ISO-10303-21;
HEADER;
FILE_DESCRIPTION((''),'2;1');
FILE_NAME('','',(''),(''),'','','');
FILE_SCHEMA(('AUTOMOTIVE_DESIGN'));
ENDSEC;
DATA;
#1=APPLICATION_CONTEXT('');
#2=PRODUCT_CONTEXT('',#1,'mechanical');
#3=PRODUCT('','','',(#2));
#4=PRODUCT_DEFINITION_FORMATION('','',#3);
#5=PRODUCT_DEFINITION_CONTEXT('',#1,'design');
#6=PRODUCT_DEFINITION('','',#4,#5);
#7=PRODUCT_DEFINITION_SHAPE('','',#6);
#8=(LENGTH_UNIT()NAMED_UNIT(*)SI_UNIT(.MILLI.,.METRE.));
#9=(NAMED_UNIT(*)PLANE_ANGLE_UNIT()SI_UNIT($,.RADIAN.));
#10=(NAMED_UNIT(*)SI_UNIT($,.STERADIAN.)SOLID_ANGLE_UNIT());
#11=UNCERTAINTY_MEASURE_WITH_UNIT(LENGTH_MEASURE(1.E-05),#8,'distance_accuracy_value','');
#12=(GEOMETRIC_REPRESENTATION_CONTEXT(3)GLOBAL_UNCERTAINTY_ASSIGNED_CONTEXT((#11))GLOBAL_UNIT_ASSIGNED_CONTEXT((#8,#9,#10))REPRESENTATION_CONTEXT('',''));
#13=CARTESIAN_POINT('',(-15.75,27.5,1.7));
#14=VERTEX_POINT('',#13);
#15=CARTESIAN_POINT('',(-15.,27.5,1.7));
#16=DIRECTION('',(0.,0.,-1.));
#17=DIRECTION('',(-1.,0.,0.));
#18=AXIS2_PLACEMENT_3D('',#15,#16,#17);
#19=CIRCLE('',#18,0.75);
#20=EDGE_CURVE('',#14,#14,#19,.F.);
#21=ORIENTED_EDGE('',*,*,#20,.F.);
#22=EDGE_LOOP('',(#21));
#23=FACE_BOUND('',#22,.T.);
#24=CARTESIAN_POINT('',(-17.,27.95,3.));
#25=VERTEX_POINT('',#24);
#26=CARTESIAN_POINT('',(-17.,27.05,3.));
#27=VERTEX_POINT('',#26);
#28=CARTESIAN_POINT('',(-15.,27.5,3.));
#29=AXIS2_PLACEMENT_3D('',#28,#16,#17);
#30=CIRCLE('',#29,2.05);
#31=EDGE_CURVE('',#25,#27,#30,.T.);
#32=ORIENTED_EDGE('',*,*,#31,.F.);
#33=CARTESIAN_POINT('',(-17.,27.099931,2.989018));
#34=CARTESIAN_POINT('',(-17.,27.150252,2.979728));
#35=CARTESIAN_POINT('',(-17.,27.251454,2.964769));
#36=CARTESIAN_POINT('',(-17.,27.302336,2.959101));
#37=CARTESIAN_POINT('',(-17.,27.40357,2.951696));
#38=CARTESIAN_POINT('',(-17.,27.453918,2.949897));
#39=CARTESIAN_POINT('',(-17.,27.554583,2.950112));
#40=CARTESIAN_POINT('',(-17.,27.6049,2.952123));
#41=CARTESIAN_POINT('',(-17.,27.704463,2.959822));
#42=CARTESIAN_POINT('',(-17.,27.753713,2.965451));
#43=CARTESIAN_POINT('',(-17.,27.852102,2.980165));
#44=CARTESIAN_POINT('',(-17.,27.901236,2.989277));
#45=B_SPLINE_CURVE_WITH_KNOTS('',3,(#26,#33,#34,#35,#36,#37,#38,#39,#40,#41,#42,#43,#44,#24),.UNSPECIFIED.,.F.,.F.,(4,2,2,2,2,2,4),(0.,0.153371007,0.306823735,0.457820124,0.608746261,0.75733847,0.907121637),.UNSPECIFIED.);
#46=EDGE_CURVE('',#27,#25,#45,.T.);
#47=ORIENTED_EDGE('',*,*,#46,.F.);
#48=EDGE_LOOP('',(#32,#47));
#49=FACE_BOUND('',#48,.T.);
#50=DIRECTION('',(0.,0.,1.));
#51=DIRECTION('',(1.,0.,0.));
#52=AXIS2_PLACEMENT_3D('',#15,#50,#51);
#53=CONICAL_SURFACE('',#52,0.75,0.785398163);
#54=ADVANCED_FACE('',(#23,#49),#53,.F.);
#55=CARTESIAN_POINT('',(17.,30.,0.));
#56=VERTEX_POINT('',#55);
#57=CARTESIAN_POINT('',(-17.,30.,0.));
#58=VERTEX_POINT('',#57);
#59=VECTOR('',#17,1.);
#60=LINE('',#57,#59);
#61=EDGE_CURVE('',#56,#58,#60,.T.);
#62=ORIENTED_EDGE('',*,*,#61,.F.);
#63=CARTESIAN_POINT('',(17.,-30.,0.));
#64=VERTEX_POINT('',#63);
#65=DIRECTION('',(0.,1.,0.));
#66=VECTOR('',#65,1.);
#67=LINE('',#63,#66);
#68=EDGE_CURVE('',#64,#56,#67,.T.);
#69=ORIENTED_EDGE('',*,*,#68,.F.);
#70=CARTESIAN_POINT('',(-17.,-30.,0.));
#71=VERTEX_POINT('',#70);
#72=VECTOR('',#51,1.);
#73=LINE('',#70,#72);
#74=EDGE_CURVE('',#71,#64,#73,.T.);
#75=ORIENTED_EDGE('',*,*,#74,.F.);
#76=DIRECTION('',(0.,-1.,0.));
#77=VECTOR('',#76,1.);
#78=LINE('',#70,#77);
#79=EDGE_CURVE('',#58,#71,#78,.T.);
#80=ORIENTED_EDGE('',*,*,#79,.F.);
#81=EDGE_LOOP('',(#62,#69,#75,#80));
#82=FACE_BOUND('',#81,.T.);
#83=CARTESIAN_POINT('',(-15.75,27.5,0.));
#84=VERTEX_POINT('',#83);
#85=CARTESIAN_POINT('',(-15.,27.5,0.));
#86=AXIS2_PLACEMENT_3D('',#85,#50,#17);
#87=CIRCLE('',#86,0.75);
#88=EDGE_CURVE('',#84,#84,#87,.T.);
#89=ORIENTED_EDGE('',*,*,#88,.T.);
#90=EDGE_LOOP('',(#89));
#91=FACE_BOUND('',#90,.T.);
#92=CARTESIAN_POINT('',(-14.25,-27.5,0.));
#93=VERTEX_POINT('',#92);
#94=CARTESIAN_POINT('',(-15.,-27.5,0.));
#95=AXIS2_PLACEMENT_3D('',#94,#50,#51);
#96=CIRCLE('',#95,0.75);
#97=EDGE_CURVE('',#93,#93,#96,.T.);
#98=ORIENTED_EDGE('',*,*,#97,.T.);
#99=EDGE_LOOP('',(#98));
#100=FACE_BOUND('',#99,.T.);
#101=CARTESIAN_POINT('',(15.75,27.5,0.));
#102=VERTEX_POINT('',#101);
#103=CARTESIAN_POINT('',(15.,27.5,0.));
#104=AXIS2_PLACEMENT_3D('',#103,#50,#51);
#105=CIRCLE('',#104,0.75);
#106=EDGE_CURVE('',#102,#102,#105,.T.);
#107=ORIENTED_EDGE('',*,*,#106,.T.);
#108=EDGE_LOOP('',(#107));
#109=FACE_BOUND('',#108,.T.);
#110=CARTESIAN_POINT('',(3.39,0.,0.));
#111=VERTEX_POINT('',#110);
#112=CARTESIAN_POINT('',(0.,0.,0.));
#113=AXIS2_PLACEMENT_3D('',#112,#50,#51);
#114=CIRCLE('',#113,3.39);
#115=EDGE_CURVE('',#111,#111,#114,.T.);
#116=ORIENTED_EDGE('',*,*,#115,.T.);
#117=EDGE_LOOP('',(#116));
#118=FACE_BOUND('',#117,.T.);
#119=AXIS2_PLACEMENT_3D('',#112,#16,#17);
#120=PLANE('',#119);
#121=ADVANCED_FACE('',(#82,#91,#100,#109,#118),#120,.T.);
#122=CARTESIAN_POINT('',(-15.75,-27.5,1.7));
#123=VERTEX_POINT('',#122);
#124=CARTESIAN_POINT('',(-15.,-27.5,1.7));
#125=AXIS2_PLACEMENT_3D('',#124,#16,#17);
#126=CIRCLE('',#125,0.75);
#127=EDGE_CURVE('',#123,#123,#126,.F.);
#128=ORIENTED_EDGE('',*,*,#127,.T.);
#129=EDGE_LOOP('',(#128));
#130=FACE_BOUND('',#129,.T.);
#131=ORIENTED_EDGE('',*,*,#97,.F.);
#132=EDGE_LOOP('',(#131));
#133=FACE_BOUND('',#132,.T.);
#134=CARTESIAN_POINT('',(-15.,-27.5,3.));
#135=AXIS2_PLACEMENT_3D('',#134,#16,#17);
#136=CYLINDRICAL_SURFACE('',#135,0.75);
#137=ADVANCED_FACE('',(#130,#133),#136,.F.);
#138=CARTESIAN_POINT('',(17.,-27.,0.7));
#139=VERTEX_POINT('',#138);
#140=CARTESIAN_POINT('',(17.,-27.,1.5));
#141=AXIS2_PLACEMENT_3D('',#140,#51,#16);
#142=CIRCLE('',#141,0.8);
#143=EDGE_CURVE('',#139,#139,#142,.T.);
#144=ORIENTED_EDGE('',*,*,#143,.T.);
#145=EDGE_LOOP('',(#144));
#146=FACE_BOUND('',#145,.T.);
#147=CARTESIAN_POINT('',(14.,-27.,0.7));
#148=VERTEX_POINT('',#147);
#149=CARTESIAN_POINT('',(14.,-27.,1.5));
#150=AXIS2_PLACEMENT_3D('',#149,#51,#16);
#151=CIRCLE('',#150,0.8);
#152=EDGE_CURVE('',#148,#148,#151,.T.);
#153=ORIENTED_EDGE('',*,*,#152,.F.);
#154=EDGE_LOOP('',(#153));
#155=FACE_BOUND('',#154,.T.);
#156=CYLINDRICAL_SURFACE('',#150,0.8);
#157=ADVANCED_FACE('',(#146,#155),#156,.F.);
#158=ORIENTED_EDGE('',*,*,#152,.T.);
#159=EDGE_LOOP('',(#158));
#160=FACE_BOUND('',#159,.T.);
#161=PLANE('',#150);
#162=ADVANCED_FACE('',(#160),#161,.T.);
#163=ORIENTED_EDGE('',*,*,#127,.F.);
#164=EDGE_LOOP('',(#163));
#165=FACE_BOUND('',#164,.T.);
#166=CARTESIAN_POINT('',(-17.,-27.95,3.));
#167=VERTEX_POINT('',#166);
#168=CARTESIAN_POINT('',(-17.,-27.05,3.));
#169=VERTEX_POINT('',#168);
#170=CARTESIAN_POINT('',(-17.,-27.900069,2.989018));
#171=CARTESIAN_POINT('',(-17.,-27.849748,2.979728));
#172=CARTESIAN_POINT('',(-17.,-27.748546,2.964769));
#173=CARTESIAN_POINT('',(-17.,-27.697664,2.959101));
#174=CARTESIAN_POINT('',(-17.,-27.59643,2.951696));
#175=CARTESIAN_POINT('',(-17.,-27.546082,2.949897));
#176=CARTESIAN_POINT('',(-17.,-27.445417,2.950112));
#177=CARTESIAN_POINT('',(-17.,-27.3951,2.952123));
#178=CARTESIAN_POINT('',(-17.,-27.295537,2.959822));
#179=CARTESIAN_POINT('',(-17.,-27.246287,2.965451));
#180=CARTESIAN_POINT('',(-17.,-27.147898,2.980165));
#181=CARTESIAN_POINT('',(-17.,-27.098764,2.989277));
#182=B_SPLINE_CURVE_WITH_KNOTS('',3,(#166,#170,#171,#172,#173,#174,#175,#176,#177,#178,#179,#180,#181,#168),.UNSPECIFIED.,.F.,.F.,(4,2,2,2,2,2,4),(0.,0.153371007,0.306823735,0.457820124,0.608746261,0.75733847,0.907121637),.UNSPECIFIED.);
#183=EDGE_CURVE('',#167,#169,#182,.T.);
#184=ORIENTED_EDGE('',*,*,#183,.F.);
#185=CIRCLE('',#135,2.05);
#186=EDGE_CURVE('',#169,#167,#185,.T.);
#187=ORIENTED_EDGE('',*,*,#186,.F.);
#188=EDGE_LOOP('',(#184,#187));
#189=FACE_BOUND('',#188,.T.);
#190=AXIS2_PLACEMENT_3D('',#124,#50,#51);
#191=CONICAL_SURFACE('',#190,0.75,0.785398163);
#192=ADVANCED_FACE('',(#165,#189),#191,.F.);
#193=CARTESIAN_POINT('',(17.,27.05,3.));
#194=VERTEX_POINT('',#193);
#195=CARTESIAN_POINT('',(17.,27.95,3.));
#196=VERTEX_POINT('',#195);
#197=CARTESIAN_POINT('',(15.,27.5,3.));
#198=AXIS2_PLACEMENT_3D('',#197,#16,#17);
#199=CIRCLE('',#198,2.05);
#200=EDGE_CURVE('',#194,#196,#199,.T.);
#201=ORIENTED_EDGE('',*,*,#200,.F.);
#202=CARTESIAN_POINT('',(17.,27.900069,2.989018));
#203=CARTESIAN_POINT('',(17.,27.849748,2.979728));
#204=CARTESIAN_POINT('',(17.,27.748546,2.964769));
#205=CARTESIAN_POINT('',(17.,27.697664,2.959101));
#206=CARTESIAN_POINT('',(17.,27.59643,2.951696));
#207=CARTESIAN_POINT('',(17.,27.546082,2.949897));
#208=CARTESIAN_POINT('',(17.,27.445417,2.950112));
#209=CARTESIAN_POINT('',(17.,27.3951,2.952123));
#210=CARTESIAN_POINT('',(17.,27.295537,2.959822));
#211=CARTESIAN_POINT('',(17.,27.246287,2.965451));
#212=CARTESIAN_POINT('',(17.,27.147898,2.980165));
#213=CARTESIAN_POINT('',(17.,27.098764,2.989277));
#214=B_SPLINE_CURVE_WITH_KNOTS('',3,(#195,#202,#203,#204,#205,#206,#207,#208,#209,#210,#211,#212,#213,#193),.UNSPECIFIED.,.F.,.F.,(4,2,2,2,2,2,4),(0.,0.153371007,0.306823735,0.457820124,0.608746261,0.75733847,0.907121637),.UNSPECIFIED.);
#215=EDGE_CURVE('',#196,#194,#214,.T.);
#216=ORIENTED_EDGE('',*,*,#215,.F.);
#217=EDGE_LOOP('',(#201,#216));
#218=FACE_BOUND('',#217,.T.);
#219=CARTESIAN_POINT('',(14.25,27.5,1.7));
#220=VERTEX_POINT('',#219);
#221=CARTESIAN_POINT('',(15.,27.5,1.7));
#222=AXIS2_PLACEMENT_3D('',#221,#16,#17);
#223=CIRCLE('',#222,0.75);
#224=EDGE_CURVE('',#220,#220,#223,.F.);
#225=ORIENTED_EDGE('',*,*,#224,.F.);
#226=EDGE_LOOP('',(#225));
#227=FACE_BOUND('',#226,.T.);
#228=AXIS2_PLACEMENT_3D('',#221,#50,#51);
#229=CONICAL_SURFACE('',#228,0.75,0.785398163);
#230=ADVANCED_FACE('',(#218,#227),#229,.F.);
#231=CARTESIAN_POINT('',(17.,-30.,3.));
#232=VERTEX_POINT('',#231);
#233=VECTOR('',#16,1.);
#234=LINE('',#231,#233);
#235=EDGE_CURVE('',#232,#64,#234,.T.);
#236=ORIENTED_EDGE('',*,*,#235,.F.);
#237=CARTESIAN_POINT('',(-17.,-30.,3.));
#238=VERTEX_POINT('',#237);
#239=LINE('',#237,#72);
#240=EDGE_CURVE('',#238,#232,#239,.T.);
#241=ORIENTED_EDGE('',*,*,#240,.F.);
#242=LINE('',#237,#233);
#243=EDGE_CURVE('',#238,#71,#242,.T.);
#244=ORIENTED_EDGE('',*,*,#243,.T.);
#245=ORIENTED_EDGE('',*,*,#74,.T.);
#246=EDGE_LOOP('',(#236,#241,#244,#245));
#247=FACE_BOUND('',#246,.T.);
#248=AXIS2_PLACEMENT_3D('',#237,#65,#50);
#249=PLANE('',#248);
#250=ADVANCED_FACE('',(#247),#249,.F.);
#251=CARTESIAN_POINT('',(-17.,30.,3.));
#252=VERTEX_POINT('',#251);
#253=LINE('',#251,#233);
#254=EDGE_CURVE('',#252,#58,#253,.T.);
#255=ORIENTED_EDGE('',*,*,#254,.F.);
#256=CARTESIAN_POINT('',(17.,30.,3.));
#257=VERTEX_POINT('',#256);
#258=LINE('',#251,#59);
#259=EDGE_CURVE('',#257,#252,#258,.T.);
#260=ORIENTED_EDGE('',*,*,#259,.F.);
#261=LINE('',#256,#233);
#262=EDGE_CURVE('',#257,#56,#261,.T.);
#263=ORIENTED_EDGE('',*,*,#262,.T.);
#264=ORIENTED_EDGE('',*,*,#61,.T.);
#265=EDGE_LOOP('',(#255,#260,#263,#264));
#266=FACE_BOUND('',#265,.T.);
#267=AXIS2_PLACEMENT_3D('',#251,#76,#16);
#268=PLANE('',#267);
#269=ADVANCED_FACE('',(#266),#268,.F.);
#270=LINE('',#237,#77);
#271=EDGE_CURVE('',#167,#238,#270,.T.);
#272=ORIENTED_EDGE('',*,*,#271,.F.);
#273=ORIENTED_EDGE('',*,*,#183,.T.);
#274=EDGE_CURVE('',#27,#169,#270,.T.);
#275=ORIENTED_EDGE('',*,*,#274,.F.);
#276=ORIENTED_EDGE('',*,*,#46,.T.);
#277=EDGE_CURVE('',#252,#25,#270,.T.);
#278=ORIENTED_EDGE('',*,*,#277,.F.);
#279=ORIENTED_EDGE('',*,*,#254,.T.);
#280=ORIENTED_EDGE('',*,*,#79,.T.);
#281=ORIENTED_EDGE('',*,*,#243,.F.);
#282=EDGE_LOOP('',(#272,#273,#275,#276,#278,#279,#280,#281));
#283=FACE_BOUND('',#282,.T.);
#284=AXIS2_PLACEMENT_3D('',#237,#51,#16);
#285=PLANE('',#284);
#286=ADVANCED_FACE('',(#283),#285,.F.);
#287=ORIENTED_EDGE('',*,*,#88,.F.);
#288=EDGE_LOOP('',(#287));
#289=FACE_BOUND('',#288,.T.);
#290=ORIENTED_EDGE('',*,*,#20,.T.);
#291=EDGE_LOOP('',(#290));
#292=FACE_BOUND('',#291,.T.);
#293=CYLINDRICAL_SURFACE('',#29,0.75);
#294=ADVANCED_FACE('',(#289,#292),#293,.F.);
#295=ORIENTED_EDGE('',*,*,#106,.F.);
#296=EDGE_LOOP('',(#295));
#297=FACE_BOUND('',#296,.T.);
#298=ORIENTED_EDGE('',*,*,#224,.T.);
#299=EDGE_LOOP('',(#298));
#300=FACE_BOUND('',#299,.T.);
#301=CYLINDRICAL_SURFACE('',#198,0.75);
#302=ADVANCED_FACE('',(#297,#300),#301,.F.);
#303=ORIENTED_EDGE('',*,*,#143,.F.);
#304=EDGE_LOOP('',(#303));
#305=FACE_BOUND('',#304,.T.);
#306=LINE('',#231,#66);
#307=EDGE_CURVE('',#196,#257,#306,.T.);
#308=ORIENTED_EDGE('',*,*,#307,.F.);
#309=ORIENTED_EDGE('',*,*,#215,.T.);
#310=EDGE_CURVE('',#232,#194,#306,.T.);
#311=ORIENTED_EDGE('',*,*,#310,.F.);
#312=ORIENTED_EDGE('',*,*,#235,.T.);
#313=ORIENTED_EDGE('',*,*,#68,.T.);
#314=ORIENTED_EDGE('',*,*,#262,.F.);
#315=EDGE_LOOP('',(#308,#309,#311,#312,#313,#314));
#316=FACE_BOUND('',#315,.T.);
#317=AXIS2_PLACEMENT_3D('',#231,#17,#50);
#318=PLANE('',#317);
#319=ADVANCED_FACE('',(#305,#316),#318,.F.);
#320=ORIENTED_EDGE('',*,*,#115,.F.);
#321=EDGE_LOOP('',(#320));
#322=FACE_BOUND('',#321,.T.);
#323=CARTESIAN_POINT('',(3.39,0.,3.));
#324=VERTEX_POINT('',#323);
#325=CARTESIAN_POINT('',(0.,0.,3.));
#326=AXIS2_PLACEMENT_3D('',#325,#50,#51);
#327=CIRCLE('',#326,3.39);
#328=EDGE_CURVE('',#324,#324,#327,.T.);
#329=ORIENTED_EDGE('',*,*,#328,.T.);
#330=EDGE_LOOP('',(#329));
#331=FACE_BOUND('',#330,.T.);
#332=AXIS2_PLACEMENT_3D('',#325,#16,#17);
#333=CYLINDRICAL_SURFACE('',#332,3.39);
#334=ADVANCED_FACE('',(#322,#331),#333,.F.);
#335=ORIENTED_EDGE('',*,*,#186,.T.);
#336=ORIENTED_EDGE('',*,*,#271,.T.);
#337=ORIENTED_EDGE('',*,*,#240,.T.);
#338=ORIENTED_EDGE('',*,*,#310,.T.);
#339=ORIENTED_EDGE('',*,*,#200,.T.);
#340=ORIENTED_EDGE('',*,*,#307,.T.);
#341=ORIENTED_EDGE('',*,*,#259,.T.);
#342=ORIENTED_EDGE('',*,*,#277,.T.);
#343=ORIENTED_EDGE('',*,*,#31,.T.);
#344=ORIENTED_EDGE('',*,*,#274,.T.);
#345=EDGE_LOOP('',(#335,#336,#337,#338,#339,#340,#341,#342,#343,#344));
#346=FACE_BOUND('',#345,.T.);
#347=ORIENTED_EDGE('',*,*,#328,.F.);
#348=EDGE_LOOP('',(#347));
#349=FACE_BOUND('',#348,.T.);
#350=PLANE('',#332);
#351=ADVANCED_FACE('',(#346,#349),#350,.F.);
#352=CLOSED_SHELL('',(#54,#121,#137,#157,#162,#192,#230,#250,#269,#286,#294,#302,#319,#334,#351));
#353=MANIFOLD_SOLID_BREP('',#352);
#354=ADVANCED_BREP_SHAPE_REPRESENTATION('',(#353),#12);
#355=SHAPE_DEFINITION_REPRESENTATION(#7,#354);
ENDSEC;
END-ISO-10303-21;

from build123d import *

# Parameters (mm, degrees)
SKETCH1_W           = 34
SKETCH1_H           = 60
SKETCH1_R           = 3.39
SKETCH1_R_2         = 0.75
BOSS_EXTRUDE1_DEPTH = 3
CHAMFER1_SIZE       = 1.3
SKETCH2_R           = 0.8
CUT_EXTRUDE1_DEPTH  = 3


with BuildPart() as part:
    # Sketch1 → Boss-Extrude1 (new body)
    with BuildSketch(Plane.XY):
        Rectangle(SKETCH1_W, SKETCH1_H)
        Circle(SKETCH1_R, mode=Mode.SUBTRACT)
        with Locations((-15, -27.5)):
            Circle(SKETCH1_R_2, mode=Mode.SUBTRACT)
        with Locations(Location((-15, 27.5, 0), (0, 0, 180))):
            Circle(SKETCH1_R_2, mode=Mode.SUBTRACT)
        with Locations((15, 27.5)):
            Circle(SKETCH1_R_2, mode=Mode.SUBTRACT)
    extrude(amount=BOSS_EXTRUDE1_DEPTH)

    # Chamfer1
    # the kernel refuses this chamfer: 1.3 mm, written as the material it takes off along each edge
    with BuildSketch(Plane(origin=(-15, -27.5, 3), x_dir=(1, 0, 0), z_dir=(0, -1, 0))) as chamfer1_piece_1:
        Polygon((0.75, -CHAMFER1_SIZE), (0.75 + CHAMFER1_SIZE, 0), (0.75, 0), align=None)
    revolve(axis=Axis((-15, -27.5, 3), (0, 0, 1)), mode=Mode.SUBTRACT)
    with BuildSketch(Plane(origin=(-15, 27.5, 3), x_dir=(-1, 0, 0), z_dir=(0, 1, 0))) as chamfer1_piece_2:
        Polygon((0.75, -CHAMFER1_SIZE), (0.75 + CHAMFER1_SIZE, 0), (0.75, 0), align=None)
    revolve(axis=Axis((-15, 27.5, 3), (0, 0, 1)), mode=Mode.SUBTRACT)
    with BuildSketch(Plane(origin=(15, 27.5, 3), x_dir=(1, 0, 0), z_dir=(0, -1, 0))) as chamfer1_piece_3:
        Polygon((0.75, -CHAMFER1_SIZE), (0.75 + CHAMFER1_SIZE, 0), (0.75, 0), align=None)
    revolve(axis=Axis((15, 27.5, 3), (0, 0, 1)), mode=Mode.SUBTRACT)

    # Sketch2 → Cut-Extrude1 (cut)
    with BuildSketch(Plane(origin=(17, 0, 0), x_dir=(0, 0, -1), z_dir=(1, 0, 0))):
        with Locations((-1.5, -27)):
            Circle(SKETCH2_R)
    extrude(amount=-CUT_EXTRUDE1_DEPTH, mode=Mode.SUBTRACT)


solid = part.part
